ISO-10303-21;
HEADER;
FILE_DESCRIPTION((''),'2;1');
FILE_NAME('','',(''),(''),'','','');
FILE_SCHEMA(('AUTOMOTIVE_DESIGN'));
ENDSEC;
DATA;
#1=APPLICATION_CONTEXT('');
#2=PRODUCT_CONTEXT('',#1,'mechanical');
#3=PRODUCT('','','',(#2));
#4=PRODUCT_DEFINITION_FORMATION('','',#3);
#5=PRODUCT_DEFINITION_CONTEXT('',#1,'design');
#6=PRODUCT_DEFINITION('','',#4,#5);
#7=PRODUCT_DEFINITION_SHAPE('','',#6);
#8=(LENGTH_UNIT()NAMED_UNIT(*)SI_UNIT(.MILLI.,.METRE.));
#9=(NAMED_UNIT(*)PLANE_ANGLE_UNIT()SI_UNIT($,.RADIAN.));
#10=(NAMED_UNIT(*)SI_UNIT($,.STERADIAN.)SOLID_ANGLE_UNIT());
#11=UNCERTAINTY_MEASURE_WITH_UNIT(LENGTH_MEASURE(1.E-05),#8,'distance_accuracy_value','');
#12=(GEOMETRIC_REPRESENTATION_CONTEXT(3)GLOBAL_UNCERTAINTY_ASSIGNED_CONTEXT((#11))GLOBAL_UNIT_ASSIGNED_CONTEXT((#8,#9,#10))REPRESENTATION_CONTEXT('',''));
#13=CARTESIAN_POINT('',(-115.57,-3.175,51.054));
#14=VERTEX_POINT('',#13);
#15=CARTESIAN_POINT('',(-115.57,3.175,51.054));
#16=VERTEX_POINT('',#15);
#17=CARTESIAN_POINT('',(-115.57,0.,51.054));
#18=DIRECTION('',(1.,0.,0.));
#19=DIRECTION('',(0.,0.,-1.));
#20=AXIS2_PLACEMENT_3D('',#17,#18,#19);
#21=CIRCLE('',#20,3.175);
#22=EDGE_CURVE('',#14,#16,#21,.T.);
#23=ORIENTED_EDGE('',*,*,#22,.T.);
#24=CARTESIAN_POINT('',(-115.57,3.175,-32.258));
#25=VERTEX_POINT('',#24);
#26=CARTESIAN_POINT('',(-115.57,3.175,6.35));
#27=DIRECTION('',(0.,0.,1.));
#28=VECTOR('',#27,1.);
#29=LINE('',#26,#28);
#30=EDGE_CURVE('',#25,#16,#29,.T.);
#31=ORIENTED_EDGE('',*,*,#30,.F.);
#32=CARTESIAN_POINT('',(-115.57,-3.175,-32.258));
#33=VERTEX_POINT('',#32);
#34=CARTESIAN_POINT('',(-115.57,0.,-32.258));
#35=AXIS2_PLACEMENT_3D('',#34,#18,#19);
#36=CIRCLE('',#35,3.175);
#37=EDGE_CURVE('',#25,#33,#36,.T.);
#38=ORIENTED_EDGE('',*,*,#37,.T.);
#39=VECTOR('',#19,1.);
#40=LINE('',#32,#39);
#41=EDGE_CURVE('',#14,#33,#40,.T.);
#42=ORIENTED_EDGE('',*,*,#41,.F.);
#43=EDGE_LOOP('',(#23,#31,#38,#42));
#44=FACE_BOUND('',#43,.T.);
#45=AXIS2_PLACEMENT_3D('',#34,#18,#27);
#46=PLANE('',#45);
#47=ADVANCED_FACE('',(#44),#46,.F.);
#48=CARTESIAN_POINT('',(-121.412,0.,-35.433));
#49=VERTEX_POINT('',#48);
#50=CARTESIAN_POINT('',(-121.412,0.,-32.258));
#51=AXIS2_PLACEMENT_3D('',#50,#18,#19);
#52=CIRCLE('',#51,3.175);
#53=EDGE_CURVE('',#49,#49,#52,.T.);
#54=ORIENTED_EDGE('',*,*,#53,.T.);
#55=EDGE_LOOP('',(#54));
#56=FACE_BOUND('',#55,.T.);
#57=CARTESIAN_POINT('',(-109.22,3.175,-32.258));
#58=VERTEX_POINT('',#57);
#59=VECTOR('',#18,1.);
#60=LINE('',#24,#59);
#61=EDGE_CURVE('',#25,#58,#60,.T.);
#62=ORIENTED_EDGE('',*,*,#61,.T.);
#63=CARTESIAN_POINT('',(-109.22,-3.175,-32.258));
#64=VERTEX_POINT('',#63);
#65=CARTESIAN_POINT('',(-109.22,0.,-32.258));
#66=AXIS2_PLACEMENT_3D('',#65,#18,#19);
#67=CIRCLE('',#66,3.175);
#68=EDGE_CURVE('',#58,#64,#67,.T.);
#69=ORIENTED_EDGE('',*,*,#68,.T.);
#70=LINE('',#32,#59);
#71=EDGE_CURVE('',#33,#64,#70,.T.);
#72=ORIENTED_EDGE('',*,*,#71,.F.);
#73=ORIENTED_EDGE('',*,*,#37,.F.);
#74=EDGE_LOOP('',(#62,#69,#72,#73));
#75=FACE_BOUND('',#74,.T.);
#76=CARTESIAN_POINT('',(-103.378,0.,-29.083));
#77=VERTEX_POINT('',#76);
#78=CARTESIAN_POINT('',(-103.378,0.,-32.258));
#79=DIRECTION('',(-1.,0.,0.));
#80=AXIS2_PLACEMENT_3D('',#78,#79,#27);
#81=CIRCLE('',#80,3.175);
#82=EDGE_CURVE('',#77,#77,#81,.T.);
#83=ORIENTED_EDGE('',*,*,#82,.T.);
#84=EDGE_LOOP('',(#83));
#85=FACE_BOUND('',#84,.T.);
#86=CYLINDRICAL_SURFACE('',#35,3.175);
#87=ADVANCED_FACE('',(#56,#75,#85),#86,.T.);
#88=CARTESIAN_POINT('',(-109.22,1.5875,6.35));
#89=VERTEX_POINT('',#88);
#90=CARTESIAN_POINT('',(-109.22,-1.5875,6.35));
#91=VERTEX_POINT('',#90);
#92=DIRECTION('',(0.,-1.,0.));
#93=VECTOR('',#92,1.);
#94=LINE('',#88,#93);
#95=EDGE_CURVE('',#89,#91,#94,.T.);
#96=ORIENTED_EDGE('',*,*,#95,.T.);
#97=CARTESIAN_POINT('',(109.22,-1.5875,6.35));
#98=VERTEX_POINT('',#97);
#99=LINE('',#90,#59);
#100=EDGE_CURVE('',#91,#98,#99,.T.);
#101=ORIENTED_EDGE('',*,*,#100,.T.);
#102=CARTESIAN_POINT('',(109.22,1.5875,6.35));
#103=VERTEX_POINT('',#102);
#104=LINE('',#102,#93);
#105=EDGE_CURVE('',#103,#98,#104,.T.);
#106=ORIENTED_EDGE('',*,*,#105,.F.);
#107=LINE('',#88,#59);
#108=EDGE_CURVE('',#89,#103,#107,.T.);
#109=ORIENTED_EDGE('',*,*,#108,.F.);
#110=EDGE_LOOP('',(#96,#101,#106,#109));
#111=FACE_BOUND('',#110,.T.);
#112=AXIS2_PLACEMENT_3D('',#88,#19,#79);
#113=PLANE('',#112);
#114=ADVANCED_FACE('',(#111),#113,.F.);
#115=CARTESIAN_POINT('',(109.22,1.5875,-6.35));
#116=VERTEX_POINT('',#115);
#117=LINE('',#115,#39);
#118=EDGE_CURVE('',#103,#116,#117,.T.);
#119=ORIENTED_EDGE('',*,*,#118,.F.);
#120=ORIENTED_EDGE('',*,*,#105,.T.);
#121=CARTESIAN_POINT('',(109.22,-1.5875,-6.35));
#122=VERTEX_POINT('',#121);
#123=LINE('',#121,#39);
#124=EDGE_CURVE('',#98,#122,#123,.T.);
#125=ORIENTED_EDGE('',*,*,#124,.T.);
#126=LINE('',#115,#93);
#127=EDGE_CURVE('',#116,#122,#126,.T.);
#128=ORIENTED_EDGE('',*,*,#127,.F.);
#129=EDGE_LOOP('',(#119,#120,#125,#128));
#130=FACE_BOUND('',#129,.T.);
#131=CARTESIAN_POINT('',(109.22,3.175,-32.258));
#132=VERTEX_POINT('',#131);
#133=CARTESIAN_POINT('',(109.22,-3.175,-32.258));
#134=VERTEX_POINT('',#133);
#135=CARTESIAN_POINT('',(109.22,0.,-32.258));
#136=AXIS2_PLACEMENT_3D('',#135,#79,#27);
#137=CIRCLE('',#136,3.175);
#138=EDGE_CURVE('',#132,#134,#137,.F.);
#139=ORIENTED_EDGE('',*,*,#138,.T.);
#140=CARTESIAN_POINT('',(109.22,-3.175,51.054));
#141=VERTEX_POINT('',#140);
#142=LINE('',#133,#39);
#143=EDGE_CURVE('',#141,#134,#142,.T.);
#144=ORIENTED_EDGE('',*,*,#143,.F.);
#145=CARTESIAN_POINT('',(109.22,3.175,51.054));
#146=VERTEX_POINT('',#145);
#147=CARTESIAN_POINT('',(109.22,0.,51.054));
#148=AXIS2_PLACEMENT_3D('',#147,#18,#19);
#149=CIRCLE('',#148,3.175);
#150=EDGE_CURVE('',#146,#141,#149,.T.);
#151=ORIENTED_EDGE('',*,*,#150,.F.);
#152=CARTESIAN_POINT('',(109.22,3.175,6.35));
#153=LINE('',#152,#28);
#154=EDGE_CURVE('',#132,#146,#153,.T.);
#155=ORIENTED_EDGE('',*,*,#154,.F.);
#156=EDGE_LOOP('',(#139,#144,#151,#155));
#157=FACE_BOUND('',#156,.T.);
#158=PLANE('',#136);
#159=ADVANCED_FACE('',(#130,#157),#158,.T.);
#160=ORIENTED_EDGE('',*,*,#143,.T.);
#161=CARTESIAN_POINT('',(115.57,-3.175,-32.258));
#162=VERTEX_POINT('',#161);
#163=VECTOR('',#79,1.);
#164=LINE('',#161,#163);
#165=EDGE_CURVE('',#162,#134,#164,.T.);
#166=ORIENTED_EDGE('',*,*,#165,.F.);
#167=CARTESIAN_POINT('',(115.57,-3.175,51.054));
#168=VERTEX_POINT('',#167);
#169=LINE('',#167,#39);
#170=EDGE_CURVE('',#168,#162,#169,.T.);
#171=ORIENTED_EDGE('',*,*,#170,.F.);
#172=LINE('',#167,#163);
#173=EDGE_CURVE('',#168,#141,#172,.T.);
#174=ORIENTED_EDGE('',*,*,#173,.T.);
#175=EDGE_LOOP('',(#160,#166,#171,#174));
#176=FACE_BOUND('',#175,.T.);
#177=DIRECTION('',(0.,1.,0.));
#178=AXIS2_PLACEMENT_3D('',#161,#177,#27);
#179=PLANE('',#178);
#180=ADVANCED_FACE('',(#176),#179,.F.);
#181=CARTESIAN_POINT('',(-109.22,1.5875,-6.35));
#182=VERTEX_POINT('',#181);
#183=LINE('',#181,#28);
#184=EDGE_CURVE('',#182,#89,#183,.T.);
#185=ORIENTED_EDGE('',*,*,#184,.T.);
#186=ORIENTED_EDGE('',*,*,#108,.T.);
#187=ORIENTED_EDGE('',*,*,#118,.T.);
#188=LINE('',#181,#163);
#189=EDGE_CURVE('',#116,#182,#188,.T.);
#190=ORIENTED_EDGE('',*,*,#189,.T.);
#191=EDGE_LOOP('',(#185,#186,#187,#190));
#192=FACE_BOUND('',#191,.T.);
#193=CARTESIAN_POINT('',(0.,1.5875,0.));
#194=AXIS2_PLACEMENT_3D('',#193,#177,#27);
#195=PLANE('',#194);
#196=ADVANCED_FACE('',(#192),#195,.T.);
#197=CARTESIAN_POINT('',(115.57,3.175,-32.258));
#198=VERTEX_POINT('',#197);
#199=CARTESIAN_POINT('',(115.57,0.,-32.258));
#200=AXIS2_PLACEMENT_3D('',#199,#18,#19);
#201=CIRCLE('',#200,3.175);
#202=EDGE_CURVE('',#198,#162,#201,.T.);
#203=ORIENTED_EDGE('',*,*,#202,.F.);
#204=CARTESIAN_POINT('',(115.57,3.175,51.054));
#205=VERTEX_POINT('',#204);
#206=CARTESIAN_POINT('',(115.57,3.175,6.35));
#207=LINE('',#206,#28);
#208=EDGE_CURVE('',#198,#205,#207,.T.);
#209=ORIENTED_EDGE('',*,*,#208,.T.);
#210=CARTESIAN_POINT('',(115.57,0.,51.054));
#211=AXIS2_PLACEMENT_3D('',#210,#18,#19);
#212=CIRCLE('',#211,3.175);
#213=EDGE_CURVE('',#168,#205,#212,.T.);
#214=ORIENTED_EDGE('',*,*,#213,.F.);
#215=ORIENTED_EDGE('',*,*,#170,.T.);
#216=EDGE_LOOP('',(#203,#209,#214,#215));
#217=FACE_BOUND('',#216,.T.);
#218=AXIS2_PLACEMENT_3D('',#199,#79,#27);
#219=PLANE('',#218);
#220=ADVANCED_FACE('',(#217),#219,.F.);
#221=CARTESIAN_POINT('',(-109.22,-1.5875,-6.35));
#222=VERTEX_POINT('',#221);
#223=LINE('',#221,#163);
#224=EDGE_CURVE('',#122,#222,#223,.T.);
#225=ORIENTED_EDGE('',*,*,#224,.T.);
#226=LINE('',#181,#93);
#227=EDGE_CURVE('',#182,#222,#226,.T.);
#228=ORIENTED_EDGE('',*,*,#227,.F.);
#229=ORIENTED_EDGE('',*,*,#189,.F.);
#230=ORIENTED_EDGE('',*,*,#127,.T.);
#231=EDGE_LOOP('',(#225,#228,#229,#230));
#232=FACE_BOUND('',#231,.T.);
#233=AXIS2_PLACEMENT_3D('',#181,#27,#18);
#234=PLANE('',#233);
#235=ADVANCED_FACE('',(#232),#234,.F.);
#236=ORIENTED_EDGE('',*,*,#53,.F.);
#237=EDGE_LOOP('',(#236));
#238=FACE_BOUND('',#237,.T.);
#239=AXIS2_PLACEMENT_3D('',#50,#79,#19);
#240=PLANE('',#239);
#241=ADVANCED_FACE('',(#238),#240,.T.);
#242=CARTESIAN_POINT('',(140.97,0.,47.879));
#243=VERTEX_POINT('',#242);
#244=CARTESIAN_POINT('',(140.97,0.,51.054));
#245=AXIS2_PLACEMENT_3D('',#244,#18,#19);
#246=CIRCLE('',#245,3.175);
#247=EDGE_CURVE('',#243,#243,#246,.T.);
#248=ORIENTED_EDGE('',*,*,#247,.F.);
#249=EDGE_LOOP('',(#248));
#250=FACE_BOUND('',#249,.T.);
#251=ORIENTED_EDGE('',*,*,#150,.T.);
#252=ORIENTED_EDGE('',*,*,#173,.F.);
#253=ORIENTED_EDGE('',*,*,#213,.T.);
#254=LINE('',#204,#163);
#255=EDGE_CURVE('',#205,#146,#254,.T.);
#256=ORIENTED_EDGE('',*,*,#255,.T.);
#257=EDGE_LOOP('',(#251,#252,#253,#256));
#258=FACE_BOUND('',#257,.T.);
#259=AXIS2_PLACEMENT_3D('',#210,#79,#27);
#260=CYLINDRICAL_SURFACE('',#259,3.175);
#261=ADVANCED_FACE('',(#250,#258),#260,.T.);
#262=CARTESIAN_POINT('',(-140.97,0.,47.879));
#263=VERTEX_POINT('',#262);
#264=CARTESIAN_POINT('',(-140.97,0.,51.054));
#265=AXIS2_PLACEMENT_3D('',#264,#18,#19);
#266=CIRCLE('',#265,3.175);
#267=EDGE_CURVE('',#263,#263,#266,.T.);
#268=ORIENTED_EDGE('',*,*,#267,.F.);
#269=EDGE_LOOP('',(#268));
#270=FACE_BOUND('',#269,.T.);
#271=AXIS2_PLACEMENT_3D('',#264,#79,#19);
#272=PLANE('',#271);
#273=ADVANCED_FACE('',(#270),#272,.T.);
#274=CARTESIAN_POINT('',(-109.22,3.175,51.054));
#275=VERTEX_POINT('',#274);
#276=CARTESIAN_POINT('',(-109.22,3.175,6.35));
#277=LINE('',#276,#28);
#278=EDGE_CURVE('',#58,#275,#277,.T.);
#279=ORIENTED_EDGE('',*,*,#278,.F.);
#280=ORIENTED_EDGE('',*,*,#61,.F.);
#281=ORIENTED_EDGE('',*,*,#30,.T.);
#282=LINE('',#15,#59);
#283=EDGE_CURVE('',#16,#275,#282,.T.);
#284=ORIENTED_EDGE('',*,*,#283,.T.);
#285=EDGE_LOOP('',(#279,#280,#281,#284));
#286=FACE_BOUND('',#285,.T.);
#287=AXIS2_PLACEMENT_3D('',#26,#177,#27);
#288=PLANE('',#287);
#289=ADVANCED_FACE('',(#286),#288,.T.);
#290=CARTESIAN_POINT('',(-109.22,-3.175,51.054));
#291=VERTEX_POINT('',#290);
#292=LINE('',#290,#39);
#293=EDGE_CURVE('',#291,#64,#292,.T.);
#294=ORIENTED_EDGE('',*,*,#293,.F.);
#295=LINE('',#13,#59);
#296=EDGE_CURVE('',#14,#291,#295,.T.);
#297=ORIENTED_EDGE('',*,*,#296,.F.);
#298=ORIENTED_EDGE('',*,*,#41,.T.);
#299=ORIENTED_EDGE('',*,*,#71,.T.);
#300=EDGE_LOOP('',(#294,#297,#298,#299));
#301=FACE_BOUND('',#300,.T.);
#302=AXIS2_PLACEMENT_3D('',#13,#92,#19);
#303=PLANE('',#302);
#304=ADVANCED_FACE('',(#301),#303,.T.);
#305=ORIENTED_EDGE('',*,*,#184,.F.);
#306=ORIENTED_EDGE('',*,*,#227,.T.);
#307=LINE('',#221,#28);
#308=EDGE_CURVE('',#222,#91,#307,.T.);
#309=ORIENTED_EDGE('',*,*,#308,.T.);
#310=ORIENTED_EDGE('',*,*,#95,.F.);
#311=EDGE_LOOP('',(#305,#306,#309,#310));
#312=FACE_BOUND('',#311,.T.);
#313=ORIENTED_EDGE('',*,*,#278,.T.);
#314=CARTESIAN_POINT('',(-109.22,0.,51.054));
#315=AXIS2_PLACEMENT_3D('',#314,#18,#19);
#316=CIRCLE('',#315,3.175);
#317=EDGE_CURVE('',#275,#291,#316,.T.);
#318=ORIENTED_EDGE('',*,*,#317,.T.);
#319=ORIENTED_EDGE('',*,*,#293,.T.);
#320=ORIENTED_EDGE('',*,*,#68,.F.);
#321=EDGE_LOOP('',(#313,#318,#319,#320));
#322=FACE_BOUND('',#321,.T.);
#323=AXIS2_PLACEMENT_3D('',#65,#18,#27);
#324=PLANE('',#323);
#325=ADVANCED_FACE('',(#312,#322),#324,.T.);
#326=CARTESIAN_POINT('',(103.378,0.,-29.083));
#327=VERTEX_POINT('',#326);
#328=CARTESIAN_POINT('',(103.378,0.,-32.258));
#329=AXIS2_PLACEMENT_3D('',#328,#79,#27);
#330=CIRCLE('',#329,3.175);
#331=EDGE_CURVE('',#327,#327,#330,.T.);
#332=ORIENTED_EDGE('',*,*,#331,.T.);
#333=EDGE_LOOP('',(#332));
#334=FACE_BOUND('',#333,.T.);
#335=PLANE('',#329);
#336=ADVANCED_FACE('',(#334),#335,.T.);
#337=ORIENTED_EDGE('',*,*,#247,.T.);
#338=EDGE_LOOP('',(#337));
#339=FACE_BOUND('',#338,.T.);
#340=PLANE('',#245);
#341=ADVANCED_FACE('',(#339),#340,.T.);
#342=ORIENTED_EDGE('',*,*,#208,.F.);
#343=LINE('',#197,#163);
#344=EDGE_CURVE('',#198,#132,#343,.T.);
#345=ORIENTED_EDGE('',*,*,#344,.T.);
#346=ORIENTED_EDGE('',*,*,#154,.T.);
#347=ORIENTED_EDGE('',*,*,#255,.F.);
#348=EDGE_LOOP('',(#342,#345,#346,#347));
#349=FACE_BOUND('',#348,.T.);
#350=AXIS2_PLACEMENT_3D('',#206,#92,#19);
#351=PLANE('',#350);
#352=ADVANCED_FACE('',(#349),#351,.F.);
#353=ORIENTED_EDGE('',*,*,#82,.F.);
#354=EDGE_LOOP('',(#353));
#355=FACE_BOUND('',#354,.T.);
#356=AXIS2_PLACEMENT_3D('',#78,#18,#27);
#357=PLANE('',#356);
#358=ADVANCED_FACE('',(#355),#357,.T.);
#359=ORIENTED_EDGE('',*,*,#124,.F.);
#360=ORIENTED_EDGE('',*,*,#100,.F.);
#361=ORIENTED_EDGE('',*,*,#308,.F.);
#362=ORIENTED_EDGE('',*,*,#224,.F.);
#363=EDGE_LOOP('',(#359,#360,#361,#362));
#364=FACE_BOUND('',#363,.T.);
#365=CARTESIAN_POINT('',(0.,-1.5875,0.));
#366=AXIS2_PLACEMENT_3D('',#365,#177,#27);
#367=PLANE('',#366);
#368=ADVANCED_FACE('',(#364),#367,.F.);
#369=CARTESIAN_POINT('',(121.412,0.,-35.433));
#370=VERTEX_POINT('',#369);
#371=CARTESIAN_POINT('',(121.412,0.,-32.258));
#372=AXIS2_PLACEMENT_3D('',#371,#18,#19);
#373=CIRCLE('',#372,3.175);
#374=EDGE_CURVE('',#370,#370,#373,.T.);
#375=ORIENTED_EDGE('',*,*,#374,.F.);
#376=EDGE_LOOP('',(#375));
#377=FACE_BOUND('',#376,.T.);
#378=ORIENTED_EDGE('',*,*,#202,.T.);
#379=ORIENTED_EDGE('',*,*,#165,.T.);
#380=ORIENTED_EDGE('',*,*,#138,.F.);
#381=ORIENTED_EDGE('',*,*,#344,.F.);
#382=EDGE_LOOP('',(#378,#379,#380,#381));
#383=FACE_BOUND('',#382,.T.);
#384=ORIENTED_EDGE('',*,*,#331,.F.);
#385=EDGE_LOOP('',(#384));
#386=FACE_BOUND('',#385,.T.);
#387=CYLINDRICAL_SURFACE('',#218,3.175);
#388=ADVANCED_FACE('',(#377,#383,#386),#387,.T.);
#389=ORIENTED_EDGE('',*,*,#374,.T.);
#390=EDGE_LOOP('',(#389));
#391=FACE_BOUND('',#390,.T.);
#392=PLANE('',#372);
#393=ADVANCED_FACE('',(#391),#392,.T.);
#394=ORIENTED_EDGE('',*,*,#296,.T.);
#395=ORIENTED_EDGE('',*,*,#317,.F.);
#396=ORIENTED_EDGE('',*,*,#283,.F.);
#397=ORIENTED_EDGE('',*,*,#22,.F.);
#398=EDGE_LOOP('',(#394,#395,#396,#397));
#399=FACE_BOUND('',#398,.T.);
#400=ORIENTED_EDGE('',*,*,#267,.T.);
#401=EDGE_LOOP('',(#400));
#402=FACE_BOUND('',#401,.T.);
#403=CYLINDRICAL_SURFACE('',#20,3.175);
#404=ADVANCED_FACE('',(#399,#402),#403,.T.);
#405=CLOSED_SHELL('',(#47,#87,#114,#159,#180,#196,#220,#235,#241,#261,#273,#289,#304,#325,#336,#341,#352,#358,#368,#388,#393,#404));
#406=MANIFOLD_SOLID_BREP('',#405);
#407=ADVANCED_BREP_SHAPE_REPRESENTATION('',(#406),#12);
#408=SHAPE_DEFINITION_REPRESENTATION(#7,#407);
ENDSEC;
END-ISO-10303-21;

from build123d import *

# Parameters (mm, degrees)
SKETCH1_W           = 218.44
SKETCH1_H           = 12.7
BOSS_EXTRUDE1_DEPTH = 1.5875
BOSS_EXTRUDE3_DEPTH = 6.35
SKETCH3_R           = 3.175
BOSS_EXTRUDE4_DEPTH = 25.4
SKETCH5_R           = 3.175
BOSS_EXTRUDE5_DEPTH = 5.842
BOSS_EXTRUDE6_START = 5.842
SKETCH6_R           = 3.175
BOSS_EXTRUDE6_DEPTH = 5.842


with BuildPart() as part:
    # Sketch1 → Boss-Extrude1 (new, symmetric)
    with BuildSketch(Plane(origin=(0, 0, 0), x_dir=(1, 0, 0), z_dir=(0, 1, 0))):
        Rectangle(SKETCH1_W, SKETCH1_H)
    extrude(amount=BOSS_EXTRUDE1_DEPTH, both=True)

    # Sketch2 → Boss-Extrude3 (add)
    with BuildSketch(Plane(origin=(109.22, 0, 0), x_dir=(0, 0, -1), z_dir=(1, 0, 0))):
        with BuildLine():
            Line((-6.35, 3.175), (-51.054, 3.175))
            ThreePointArc((-51.054, 3.175), (-54.229, 0), (-51.054, -3.175))
            Line((-51.054, -3.175), (-6.35, -3.175))
            Line((-6.35, -3.175), (32.258, -3.175))
            ThreePointArc((32.258, -3.175), (35.433, 0), (32.258, 3.175))
            Line((32.258, 3.175), (-6.35, 3.175))
        make_face()
    boss_extrude3 = extrude(amount=BOSS_EXTRUDE3_DEPTH)

    # Sketch3 → Boss-Extrude4 (add)
    with BuildSketch(Plane(origin=(115.57, 0, 0), x_dir=(0, 0, -1), z_dir=(1, 0, 0))):
        with Locations((-51.054, 0)):
            Circle(SKETCH3_R)
    boss_extrude4 = extrude(amount=BOSS_EXTRUDE4_DEPTH)

    # Sketch5 → Boss-Extrude5 (add)
    with BuildSketch(Plane(origin=(115.57, 0, 0), x_dir=(0, 0, -1), z_dir=(1, 0, 0))):
        with Locations((32.258, 0)):
            Circle(SKETCH5_R)
    boss_extrude5 = extrude(amount=BOSS_EXTRUDE5_DEPTH)

    # Sketch6 → Boss-Extrude6 (add)
    with BuildSketch(Plane.ZY.offset(-109.22).offset(BOSS_EXTRUDE6_START)):
        with Locations((-32.258, 0)):
            Circle(SKETCH6_R)
    boss_extrude6 = extrude(amount=-BOSS_EXTRUDE6_DEPTH)

    # Mirror1: Boss-Extrude3, Boss-Extrude4, Boss-Extrude5, Boss-Extrude6 across plane
    add(boss_extrude3.mirror(Plane(origin=(0, 0, 0), x_dir=(0, 0, 1), z_dir=(1, 0, 0))))
    add(boss_extrude4.mirror(Plane(origin=(0, 0, 0), x_dir=(0, 0, 1), z_dir=(1, 0, 0))))
    add(boss_extrude5.mirror(Plane(origin=(0, 0, 0), x_dir=(0, 0, 1), z_dir=(1, 0, 0))))
    add(boss_extrude6.mirror(Plane(origin=(0, 0, 0), x_dir=(0, 0, 1), z_dir=(1, 0, 0))))


solid = part.part
